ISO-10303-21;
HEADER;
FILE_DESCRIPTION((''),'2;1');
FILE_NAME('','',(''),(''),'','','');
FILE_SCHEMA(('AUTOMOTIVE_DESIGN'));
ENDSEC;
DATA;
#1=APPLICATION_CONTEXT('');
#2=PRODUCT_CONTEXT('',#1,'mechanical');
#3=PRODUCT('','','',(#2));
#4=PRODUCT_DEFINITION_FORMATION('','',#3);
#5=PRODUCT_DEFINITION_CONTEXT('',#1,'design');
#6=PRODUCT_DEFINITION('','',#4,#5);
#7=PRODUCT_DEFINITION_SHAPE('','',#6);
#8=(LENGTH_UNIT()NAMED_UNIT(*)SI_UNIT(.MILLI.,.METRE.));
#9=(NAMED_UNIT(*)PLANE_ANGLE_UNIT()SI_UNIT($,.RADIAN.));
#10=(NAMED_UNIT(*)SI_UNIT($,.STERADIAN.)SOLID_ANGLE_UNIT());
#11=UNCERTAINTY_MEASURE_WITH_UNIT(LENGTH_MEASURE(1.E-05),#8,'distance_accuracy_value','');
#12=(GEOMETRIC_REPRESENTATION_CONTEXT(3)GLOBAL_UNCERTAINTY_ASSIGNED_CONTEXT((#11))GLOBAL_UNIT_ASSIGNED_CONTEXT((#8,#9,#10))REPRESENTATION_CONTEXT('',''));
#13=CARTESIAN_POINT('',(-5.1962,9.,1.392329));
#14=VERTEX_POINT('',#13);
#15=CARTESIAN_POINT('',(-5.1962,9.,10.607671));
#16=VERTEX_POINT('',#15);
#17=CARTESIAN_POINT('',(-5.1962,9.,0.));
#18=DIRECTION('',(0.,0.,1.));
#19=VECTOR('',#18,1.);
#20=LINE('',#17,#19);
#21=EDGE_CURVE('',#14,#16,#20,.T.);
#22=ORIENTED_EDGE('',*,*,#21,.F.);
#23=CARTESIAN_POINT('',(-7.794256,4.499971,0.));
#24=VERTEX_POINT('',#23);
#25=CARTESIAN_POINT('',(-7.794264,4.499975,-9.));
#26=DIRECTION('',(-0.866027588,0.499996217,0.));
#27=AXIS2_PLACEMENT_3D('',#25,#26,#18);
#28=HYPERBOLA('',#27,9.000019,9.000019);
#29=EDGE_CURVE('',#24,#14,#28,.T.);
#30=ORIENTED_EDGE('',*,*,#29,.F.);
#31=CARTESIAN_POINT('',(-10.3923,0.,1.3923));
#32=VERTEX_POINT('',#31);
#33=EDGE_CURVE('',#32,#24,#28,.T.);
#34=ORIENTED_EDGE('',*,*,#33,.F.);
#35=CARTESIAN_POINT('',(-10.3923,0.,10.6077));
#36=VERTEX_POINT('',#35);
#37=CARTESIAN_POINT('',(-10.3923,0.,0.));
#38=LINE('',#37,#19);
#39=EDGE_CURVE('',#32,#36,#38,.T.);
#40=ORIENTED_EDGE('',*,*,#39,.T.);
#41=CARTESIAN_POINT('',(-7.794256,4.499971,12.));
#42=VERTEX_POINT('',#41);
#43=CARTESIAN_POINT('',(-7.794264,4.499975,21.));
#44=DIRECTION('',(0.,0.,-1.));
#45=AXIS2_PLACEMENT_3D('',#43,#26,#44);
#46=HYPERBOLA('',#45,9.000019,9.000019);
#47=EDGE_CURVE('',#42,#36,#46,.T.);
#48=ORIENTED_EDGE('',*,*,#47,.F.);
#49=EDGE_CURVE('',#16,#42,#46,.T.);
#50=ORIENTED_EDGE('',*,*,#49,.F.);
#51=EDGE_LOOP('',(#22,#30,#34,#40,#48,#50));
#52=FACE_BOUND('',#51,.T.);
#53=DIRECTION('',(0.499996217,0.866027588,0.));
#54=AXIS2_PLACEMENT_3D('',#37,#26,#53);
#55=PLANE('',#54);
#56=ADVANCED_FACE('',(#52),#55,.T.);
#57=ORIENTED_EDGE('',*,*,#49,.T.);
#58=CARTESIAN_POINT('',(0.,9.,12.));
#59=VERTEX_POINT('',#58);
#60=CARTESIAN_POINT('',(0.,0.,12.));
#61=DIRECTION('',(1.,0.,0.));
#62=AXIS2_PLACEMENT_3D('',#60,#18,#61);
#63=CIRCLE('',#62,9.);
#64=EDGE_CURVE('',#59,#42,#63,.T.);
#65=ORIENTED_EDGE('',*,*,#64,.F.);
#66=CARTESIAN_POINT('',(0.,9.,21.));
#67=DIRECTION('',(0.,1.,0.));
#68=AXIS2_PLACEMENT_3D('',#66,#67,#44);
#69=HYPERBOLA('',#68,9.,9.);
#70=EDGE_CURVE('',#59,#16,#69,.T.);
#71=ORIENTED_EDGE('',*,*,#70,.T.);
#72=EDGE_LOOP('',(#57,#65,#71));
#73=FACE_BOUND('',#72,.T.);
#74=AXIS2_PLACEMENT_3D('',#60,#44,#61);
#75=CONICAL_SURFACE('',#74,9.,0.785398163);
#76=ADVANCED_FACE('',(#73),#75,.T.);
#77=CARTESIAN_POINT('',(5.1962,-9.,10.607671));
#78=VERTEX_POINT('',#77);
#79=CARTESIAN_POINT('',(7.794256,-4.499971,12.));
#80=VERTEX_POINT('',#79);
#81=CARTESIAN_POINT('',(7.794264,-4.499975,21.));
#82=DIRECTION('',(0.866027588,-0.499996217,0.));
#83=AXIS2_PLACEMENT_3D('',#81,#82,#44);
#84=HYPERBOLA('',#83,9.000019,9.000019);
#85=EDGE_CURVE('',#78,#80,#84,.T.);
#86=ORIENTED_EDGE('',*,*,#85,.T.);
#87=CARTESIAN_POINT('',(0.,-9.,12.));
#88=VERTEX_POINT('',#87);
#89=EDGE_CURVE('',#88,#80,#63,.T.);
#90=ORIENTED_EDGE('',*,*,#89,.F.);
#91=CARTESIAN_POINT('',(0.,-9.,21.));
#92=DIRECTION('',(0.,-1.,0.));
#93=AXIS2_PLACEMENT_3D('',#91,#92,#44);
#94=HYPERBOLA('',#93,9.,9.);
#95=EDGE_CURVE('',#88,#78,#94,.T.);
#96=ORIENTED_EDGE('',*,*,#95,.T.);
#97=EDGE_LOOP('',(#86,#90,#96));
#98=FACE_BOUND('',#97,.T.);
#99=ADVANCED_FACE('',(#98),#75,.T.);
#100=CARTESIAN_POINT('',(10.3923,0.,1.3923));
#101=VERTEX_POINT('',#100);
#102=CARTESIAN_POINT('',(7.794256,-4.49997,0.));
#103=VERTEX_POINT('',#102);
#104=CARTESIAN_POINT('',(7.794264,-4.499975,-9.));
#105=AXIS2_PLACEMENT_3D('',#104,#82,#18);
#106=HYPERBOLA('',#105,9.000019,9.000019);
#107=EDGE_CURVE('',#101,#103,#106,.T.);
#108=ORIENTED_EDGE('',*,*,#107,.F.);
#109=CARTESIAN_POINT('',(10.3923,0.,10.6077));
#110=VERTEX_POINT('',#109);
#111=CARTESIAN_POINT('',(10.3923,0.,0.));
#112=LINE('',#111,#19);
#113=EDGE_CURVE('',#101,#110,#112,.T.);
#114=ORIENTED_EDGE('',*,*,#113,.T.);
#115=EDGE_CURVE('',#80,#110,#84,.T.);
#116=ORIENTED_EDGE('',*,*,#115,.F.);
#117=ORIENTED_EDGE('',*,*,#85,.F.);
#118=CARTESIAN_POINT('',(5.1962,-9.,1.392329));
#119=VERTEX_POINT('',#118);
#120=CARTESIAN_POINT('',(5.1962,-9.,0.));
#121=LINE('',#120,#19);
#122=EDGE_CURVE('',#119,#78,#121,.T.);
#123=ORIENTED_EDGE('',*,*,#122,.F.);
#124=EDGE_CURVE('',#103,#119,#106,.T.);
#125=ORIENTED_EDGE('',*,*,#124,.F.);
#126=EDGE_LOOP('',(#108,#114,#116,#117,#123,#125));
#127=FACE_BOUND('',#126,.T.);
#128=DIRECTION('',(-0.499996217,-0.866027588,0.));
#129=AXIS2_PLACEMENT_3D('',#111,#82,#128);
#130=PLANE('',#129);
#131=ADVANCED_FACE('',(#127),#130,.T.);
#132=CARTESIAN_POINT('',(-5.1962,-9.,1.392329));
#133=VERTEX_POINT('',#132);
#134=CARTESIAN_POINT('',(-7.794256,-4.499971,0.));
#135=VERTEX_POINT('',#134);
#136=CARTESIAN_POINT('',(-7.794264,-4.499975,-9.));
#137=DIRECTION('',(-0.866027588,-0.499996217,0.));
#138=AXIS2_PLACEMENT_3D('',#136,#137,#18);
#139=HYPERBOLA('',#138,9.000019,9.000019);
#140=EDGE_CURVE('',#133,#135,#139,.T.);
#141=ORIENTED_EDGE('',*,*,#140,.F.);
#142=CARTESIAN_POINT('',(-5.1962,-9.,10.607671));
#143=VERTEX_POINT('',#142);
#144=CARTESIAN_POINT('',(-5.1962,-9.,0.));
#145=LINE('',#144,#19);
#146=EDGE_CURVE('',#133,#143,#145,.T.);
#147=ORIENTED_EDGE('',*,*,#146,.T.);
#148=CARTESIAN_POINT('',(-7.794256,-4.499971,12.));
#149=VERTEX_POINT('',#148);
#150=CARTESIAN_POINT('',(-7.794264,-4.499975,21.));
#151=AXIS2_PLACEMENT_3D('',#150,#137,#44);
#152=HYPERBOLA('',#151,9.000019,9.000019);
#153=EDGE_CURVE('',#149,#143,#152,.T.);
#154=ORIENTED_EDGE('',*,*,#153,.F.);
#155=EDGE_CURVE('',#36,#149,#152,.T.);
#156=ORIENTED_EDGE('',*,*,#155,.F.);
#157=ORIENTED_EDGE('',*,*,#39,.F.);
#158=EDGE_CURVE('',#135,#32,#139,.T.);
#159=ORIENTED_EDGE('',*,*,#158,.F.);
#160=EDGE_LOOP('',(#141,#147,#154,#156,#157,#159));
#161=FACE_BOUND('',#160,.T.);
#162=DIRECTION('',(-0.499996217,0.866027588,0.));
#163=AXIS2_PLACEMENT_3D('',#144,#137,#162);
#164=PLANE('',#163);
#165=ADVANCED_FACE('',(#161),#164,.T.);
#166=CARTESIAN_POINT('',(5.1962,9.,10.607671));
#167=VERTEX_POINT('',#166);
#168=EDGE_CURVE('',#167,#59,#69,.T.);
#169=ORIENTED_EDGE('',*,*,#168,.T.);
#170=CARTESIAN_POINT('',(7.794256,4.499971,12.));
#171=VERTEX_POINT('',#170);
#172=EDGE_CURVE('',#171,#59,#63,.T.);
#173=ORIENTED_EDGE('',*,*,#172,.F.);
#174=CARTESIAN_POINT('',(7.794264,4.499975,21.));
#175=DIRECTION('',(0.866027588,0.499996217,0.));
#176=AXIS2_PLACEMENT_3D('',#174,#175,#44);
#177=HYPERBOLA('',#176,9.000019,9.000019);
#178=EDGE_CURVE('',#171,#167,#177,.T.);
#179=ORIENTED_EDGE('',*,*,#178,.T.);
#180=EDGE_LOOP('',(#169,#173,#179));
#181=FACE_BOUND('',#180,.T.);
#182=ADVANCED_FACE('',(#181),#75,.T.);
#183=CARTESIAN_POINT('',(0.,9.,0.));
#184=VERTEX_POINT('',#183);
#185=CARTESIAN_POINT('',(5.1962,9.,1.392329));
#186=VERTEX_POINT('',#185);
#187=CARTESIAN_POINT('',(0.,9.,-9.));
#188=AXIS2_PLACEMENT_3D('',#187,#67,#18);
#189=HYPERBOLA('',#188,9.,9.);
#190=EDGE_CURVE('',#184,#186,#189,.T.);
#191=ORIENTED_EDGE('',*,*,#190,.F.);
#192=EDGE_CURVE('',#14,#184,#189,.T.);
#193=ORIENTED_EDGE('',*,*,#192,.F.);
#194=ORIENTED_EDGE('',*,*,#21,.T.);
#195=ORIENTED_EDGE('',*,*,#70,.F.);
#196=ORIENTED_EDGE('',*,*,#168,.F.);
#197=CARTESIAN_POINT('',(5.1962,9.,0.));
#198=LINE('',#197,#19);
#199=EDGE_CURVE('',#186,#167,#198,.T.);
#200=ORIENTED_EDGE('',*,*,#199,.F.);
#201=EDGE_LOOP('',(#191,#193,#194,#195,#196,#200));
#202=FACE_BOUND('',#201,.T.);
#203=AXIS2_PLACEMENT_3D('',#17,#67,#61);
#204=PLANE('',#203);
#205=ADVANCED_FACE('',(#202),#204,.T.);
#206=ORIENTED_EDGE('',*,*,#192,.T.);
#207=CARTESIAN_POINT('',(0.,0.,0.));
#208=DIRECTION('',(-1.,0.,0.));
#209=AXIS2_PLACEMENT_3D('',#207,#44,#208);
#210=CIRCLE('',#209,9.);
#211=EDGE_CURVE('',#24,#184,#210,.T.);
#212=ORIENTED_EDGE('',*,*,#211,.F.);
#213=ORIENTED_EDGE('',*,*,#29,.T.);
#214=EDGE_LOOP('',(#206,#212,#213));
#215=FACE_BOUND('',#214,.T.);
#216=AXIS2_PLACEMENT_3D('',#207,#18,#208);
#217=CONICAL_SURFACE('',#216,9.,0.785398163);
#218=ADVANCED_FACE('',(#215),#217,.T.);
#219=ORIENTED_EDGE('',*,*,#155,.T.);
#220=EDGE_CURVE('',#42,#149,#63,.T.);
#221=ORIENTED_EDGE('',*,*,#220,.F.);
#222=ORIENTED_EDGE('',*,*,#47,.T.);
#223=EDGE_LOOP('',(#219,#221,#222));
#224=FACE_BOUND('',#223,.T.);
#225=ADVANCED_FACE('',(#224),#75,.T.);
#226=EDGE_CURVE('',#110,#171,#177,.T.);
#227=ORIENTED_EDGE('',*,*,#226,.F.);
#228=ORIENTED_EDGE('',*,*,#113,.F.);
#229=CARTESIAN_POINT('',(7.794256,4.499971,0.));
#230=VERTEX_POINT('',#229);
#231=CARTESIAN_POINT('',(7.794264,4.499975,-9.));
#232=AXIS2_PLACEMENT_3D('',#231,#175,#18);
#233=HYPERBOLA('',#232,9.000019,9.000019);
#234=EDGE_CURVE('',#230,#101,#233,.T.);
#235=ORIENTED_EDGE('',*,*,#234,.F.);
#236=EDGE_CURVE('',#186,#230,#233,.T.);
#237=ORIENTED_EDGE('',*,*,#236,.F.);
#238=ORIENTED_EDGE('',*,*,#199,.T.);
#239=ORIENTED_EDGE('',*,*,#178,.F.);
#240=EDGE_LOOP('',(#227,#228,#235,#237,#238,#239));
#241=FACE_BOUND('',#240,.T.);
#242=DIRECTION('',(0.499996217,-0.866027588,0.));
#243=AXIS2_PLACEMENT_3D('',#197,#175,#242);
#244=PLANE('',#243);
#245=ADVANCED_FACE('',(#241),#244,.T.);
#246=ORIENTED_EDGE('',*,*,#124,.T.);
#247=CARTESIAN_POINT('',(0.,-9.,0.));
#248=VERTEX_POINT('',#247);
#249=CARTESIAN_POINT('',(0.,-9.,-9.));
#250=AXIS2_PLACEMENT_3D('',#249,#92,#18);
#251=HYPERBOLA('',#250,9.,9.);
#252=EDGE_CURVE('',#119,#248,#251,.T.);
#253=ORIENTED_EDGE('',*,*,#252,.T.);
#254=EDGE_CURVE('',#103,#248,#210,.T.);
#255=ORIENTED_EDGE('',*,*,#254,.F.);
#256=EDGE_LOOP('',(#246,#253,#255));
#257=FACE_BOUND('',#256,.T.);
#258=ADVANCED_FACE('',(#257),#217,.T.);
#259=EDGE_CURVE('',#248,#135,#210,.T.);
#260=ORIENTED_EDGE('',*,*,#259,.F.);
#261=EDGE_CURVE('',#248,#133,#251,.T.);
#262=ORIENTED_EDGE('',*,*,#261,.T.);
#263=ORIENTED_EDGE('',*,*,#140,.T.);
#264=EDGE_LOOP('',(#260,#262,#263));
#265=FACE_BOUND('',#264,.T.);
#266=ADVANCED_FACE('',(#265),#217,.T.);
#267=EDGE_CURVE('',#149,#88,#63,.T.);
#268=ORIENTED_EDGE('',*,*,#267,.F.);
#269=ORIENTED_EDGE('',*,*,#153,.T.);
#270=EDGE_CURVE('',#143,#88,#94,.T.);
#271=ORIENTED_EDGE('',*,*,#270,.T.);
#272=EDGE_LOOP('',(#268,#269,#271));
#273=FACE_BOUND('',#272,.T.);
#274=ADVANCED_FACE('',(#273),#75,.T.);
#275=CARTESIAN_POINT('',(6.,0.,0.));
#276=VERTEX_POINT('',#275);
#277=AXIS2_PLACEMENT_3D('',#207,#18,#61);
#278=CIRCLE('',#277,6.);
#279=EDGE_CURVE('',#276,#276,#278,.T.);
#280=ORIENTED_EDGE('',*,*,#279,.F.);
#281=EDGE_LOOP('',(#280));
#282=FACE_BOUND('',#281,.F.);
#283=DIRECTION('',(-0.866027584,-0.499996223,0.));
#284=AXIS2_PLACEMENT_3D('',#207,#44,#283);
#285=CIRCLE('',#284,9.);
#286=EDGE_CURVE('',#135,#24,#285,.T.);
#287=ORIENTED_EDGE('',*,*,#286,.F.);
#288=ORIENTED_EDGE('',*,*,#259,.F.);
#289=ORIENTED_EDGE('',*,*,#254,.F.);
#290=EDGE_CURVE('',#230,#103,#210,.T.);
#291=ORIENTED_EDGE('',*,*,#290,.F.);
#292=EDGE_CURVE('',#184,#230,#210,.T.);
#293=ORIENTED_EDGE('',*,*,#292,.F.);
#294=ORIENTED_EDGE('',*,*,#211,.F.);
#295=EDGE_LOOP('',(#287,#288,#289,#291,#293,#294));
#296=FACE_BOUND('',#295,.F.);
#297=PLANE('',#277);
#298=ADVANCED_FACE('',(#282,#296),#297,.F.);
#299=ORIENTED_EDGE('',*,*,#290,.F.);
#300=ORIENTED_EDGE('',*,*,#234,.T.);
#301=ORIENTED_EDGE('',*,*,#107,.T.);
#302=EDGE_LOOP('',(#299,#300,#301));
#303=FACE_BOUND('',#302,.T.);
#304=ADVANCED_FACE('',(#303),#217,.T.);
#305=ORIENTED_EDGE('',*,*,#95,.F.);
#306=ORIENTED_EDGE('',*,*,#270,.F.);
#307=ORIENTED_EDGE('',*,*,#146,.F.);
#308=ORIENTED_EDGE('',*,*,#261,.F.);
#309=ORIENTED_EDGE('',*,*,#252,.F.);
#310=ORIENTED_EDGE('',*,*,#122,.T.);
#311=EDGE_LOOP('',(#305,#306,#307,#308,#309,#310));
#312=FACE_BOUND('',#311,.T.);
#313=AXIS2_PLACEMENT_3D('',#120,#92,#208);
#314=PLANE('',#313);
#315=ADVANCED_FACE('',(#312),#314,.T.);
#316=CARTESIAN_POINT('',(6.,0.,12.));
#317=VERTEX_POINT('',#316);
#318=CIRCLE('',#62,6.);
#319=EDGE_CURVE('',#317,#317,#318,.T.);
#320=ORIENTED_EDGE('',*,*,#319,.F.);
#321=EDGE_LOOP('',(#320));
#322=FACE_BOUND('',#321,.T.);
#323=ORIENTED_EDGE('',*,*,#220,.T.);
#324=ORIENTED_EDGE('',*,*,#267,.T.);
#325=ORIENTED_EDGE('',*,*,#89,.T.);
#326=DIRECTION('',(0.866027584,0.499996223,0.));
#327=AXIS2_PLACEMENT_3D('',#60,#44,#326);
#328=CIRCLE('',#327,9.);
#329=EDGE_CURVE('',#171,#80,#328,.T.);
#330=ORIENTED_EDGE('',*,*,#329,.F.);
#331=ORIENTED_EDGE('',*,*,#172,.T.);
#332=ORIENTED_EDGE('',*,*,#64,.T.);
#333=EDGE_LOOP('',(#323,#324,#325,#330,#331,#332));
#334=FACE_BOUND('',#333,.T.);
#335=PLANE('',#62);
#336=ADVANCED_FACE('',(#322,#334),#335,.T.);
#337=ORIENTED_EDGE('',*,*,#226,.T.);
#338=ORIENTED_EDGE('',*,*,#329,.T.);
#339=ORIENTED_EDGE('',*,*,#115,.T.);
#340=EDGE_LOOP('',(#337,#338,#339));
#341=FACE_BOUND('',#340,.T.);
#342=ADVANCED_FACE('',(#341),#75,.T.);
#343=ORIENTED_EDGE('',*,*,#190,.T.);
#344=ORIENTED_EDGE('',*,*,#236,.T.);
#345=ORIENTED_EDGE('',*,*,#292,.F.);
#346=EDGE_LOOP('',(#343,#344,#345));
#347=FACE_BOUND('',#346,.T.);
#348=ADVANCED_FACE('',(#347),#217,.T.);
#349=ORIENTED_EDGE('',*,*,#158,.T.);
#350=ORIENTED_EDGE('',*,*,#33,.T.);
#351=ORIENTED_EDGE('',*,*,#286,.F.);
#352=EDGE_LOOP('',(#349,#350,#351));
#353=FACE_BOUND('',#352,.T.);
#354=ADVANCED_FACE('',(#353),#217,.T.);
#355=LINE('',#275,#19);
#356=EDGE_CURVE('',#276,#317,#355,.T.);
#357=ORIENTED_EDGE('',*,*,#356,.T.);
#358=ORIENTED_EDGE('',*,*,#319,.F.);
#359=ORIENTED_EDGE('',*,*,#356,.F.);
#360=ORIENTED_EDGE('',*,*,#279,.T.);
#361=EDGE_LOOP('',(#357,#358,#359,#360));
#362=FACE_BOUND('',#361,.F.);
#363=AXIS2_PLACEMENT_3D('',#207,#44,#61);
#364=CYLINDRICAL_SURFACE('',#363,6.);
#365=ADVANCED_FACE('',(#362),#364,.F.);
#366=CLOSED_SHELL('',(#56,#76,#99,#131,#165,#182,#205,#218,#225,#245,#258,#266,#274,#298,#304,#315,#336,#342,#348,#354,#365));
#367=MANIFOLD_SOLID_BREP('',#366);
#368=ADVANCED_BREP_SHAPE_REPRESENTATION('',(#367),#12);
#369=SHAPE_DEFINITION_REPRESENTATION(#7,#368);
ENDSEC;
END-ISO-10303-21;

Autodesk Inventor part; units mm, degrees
ref_plane "YZ Plane" through (0, 0, 0) normal (1, 0, 0) x (0, 1, 0)
ref_plane "XZ Plane" through (0, 0, 0) normal (0, 1, 0) x (-1, 0, 0)
ref_plane "XY Plane" through (0, 0, 0) normal (0, 0, 1) x (1, 0, 0)
sketch "Sketch1" plane through (0, 0, 0) normal (0, 0, 1) x (1, 0, 0)
  line L0 (10.3923, 0) -> (5.1962, -9)
  line L1 (5.1962, -9) -> (-5.1962, -9)
  line L2 (-5.1962, -9) -> (-10.3923, 0)
  line L3 (-10.3923, 0) -> (-5.1962, 9)
  line L4 (-5.1962, 9) -> (5.1962, 9)
  line L5 (5.1962, 9) -> (10.3923, 0)
  circle A0 centre (0, 0) radius 6
  dimension "d2" = 18
  dimension "d3" = 12
extrude "Extrusion2" add sketch "Sketch1" along normal blind 12
sketch "Sketch2" plane through (0, 0, 12) normal (0, 0, 1) x (1, 0, 0)
  circle A0 centre (0, 0) radius 6 construction
  circle A1 centre (0, 0) radius 9
  line L0 (-10.3923, 0) -> (-5.1962, -9) construction
extrude "Extrusion3" cut sketch "Sketch2" against normal up to surface (12 mm away) draft 45 keep common part
sketch "Sketch3" plane through (0, 0, 0) normal (0, 0, -1) x (-1, 0, 0)
  circle A0 centre (0, 0) radius 6 construction
  circle A1 centre (0, 0) radius 9
  line L0 (-5.1962, -9) -> (-10.3923, 0) construction
extrude "Extrusion4" cut sketch "Sketch3" against normal up to surface (12 mm away) draft 45 keep common part
thread "Thread1" size "M12x1.25" class "6H" standard "ISO Metric profile" full length
equation "\"d3\" = Screw_DIA"
equation "\"d19\" = 55deg"
equation "\"Sketch4_Pitch\" = 1.25"
equation "\"Screw_DIA\" = 12"
properties part number "ISO 7040 - M12" material "STEEL, AISI 1015"
